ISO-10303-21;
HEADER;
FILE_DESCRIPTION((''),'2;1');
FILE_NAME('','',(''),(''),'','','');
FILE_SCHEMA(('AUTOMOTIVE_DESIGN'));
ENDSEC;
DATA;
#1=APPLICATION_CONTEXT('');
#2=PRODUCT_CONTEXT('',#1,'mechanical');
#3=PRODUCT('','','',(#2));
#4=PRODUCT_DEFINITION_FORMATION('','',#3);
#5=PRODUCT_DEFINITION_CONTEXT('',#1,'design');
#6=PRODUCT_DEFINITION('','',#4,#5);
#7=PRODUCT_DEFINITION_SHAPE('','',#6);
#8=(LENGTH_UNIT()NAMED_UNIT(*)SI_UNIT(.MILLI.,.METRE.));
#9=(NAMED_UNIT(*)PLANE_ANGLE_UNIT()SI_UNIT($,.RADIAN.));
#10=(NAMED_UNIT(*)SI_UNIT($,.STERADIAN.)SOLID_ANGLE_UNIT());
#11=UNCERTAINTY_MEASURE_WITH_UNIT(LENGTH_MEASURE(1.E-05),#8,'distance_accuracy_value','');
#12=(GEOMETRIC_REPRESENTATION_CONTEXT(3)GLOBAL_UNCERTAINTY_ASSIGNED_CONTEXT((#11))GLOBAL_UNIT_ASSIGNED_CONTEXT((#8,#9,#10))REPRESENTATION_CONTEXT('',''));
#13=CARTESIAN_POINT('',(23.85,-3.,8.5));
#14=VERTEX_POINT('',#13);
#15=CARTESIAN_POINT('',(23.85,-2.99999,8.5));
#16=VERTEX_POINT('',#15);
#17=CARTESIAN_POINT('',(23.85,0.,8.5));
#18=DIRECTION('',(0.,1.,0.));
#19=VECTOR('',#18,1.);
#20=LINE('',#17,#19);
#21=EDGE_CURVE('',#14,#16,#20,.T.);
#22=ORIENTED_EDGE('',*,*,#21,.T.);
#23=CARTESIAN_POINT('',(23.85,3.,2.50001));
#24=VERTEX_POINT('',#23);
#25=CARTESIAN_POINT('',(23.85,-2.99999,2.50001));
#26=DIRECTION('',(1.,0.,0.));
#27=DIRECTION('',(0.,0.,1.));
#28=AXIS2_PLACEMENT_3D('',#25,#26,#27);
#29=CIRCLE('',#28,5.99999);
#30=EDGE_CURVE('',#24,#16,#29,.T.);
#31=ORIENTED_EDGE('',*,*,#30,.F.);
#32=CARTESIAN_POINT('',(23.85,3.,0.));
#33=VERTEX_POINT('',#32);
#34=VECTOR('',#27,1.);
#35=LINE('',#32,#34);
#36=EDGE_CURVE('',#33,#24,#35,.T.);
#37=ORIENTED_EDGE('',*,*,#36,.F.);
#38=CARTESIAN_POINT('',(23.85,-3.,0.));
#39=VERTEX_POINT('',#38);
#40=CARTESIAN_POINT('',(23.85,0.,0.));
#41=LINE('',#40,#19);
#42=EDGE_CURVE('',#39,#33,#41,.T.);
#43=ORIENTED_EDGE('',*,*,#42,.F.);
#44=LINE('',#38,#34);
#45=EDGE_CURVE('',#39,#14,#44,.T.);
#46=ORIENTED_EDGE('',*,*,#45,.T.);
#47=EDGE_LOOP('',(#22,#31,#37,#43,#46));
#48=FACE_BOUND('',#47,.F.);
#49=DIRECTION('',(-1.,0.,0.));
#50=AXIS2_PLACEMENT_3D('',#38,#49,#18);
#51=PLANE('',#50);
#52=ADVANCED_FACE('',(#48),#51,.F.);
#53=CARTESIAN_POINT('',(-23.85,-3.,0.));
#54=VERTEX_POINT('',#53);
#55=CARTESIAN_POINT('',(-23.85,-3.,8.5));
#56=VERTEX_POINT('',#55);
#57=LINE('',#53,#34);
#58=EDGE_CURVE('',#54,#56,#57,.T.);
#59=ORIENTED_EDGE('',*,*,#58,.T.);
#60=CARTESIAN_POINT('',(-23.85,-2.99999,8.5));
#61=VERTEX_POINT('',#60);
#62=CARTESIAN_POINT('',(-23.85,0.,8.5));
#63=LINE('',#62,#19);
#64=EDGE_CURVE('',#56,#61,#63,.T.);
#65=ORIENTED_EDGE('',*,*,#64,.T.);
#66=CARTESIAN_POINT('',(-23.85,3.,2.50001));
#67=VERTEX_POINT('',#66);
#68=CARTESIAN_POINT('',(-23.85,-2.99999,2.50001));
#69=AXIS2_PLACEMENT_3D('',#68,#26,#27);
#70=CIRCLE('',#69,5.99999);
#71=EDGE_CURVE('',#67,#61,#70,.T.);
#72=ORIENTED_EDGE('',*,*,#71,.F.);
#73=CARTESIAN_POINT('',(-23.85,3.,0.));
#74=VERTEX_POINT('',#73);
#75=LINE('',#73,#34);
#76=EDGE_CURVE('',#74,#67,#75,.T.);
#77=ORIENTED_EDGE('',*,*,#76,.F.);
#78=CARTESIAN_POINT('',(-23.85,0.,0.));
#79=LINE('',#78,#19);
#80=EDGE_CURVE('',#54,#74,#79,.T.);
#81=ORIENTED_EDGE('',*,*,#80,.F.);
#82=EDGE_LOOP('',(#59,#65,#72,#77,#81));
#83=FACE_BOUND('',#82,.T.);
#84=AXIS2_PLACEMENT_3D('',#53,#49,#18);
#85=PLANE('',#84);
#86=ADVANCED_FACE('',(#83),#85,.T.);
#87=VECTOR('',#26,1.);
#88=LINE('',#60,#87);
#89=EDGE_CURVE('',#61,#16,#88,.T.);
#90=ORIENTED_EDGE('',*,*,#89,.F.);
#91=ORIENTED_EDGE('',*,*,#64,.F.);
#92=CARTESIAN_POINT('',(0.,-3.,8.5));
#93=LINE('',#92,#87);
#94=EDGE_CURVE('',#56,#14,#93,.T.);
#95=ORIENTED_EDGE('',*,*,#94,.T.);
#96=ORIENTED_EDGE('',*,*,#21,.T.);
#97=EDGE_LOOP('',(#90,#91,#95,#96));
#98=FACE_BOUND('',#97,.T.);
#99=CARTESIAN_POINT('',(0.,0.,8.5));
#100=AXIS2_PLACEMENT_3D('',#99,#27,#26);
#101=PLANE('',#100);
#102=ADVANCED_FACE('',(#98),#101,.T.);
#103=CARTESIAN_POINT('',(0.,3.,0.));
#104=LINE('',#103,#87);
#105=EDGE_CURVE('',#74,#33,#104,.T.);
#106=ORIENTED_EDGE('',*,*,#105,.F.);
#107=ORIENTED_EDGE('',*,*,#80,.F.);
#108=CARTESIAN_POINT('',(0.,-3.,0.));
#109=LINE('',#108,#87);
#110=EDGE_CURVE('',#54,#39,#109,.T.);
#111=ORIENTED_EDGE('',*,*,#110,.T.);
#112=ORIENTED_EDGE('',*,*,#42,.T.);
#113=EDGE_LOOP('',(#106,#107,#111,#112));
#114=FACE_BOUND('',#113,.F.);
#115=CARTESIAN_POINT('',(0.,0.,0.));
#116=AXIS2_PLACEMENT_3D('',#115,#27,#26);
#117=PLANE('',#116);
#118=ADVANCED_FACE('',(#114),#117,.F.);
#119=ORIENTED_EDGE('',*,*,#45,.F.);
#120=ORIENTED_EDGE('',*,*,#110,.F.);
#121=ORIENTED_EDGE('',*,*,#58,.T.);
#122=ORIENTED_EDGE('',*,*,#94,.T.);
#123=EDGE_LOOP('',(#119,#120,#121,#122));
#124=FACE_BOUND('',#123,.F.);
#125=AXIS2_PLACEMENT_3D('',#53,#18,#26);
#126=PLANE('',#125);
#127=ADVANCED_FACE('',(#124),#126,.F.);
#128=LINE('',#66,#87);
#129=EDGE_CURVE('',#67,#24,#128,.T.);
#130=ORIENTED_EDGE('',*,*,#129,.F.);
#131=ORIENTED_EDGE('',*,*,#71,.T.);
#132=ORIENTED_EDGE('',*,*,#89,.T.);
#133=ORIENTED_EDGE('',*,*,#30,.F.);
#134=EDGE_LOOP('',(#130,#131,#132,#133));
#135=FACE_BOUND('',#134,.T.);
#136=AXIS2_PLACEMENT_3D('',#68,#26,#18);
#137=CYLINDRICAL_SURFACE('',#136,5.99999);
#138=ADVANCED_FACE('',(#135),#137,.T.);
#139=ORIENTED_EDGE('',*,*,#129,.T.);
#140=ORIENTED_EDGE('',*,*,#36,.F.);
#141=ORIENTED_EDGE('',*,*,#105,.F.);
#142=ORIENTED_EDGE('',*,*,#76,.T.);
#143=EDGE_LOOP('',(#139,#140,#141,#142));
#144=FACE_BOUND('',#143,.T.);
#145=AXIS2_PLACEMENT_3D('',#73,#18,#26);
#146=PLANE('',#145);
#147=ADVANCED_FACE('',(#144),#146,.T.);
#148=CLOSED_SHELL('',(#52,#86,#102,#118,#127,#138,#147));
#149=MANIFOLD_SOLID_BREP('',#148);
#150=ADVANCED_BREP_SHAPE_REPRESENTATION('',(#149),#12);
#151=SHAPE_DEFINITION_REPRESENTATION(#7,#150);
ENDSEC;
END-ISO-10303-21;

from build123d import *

# Parameters (mm, degrees)
F0_W     = 47.7
F0_H     = 6
F1_DEPTH = 8.5
F2_R     = 5.99999


# Not quite as in the source:
# - a fillet or chamfer is up to 0.001 mm smaller than in the source, because OpenCascade refuses the exact size


with BuildPart() as f1:
    # F0 (on Top) → F1 (new body)
    with BuildSketch(Plane.XY):
        Rectangle(F0_W, F0_H)
    extrude(amount=F1_DEPTH)

    # F2 (radius 6 in the source; OpenCascade refuses exactly that, so slightly less here)
    f2_edges = [f1.edges().sort_by_distance(p)[0] for p in [
        (0, 3, 8.5),
    ]]
    fillet(f2_edges, radius=F2_R)


solid = f1.part
